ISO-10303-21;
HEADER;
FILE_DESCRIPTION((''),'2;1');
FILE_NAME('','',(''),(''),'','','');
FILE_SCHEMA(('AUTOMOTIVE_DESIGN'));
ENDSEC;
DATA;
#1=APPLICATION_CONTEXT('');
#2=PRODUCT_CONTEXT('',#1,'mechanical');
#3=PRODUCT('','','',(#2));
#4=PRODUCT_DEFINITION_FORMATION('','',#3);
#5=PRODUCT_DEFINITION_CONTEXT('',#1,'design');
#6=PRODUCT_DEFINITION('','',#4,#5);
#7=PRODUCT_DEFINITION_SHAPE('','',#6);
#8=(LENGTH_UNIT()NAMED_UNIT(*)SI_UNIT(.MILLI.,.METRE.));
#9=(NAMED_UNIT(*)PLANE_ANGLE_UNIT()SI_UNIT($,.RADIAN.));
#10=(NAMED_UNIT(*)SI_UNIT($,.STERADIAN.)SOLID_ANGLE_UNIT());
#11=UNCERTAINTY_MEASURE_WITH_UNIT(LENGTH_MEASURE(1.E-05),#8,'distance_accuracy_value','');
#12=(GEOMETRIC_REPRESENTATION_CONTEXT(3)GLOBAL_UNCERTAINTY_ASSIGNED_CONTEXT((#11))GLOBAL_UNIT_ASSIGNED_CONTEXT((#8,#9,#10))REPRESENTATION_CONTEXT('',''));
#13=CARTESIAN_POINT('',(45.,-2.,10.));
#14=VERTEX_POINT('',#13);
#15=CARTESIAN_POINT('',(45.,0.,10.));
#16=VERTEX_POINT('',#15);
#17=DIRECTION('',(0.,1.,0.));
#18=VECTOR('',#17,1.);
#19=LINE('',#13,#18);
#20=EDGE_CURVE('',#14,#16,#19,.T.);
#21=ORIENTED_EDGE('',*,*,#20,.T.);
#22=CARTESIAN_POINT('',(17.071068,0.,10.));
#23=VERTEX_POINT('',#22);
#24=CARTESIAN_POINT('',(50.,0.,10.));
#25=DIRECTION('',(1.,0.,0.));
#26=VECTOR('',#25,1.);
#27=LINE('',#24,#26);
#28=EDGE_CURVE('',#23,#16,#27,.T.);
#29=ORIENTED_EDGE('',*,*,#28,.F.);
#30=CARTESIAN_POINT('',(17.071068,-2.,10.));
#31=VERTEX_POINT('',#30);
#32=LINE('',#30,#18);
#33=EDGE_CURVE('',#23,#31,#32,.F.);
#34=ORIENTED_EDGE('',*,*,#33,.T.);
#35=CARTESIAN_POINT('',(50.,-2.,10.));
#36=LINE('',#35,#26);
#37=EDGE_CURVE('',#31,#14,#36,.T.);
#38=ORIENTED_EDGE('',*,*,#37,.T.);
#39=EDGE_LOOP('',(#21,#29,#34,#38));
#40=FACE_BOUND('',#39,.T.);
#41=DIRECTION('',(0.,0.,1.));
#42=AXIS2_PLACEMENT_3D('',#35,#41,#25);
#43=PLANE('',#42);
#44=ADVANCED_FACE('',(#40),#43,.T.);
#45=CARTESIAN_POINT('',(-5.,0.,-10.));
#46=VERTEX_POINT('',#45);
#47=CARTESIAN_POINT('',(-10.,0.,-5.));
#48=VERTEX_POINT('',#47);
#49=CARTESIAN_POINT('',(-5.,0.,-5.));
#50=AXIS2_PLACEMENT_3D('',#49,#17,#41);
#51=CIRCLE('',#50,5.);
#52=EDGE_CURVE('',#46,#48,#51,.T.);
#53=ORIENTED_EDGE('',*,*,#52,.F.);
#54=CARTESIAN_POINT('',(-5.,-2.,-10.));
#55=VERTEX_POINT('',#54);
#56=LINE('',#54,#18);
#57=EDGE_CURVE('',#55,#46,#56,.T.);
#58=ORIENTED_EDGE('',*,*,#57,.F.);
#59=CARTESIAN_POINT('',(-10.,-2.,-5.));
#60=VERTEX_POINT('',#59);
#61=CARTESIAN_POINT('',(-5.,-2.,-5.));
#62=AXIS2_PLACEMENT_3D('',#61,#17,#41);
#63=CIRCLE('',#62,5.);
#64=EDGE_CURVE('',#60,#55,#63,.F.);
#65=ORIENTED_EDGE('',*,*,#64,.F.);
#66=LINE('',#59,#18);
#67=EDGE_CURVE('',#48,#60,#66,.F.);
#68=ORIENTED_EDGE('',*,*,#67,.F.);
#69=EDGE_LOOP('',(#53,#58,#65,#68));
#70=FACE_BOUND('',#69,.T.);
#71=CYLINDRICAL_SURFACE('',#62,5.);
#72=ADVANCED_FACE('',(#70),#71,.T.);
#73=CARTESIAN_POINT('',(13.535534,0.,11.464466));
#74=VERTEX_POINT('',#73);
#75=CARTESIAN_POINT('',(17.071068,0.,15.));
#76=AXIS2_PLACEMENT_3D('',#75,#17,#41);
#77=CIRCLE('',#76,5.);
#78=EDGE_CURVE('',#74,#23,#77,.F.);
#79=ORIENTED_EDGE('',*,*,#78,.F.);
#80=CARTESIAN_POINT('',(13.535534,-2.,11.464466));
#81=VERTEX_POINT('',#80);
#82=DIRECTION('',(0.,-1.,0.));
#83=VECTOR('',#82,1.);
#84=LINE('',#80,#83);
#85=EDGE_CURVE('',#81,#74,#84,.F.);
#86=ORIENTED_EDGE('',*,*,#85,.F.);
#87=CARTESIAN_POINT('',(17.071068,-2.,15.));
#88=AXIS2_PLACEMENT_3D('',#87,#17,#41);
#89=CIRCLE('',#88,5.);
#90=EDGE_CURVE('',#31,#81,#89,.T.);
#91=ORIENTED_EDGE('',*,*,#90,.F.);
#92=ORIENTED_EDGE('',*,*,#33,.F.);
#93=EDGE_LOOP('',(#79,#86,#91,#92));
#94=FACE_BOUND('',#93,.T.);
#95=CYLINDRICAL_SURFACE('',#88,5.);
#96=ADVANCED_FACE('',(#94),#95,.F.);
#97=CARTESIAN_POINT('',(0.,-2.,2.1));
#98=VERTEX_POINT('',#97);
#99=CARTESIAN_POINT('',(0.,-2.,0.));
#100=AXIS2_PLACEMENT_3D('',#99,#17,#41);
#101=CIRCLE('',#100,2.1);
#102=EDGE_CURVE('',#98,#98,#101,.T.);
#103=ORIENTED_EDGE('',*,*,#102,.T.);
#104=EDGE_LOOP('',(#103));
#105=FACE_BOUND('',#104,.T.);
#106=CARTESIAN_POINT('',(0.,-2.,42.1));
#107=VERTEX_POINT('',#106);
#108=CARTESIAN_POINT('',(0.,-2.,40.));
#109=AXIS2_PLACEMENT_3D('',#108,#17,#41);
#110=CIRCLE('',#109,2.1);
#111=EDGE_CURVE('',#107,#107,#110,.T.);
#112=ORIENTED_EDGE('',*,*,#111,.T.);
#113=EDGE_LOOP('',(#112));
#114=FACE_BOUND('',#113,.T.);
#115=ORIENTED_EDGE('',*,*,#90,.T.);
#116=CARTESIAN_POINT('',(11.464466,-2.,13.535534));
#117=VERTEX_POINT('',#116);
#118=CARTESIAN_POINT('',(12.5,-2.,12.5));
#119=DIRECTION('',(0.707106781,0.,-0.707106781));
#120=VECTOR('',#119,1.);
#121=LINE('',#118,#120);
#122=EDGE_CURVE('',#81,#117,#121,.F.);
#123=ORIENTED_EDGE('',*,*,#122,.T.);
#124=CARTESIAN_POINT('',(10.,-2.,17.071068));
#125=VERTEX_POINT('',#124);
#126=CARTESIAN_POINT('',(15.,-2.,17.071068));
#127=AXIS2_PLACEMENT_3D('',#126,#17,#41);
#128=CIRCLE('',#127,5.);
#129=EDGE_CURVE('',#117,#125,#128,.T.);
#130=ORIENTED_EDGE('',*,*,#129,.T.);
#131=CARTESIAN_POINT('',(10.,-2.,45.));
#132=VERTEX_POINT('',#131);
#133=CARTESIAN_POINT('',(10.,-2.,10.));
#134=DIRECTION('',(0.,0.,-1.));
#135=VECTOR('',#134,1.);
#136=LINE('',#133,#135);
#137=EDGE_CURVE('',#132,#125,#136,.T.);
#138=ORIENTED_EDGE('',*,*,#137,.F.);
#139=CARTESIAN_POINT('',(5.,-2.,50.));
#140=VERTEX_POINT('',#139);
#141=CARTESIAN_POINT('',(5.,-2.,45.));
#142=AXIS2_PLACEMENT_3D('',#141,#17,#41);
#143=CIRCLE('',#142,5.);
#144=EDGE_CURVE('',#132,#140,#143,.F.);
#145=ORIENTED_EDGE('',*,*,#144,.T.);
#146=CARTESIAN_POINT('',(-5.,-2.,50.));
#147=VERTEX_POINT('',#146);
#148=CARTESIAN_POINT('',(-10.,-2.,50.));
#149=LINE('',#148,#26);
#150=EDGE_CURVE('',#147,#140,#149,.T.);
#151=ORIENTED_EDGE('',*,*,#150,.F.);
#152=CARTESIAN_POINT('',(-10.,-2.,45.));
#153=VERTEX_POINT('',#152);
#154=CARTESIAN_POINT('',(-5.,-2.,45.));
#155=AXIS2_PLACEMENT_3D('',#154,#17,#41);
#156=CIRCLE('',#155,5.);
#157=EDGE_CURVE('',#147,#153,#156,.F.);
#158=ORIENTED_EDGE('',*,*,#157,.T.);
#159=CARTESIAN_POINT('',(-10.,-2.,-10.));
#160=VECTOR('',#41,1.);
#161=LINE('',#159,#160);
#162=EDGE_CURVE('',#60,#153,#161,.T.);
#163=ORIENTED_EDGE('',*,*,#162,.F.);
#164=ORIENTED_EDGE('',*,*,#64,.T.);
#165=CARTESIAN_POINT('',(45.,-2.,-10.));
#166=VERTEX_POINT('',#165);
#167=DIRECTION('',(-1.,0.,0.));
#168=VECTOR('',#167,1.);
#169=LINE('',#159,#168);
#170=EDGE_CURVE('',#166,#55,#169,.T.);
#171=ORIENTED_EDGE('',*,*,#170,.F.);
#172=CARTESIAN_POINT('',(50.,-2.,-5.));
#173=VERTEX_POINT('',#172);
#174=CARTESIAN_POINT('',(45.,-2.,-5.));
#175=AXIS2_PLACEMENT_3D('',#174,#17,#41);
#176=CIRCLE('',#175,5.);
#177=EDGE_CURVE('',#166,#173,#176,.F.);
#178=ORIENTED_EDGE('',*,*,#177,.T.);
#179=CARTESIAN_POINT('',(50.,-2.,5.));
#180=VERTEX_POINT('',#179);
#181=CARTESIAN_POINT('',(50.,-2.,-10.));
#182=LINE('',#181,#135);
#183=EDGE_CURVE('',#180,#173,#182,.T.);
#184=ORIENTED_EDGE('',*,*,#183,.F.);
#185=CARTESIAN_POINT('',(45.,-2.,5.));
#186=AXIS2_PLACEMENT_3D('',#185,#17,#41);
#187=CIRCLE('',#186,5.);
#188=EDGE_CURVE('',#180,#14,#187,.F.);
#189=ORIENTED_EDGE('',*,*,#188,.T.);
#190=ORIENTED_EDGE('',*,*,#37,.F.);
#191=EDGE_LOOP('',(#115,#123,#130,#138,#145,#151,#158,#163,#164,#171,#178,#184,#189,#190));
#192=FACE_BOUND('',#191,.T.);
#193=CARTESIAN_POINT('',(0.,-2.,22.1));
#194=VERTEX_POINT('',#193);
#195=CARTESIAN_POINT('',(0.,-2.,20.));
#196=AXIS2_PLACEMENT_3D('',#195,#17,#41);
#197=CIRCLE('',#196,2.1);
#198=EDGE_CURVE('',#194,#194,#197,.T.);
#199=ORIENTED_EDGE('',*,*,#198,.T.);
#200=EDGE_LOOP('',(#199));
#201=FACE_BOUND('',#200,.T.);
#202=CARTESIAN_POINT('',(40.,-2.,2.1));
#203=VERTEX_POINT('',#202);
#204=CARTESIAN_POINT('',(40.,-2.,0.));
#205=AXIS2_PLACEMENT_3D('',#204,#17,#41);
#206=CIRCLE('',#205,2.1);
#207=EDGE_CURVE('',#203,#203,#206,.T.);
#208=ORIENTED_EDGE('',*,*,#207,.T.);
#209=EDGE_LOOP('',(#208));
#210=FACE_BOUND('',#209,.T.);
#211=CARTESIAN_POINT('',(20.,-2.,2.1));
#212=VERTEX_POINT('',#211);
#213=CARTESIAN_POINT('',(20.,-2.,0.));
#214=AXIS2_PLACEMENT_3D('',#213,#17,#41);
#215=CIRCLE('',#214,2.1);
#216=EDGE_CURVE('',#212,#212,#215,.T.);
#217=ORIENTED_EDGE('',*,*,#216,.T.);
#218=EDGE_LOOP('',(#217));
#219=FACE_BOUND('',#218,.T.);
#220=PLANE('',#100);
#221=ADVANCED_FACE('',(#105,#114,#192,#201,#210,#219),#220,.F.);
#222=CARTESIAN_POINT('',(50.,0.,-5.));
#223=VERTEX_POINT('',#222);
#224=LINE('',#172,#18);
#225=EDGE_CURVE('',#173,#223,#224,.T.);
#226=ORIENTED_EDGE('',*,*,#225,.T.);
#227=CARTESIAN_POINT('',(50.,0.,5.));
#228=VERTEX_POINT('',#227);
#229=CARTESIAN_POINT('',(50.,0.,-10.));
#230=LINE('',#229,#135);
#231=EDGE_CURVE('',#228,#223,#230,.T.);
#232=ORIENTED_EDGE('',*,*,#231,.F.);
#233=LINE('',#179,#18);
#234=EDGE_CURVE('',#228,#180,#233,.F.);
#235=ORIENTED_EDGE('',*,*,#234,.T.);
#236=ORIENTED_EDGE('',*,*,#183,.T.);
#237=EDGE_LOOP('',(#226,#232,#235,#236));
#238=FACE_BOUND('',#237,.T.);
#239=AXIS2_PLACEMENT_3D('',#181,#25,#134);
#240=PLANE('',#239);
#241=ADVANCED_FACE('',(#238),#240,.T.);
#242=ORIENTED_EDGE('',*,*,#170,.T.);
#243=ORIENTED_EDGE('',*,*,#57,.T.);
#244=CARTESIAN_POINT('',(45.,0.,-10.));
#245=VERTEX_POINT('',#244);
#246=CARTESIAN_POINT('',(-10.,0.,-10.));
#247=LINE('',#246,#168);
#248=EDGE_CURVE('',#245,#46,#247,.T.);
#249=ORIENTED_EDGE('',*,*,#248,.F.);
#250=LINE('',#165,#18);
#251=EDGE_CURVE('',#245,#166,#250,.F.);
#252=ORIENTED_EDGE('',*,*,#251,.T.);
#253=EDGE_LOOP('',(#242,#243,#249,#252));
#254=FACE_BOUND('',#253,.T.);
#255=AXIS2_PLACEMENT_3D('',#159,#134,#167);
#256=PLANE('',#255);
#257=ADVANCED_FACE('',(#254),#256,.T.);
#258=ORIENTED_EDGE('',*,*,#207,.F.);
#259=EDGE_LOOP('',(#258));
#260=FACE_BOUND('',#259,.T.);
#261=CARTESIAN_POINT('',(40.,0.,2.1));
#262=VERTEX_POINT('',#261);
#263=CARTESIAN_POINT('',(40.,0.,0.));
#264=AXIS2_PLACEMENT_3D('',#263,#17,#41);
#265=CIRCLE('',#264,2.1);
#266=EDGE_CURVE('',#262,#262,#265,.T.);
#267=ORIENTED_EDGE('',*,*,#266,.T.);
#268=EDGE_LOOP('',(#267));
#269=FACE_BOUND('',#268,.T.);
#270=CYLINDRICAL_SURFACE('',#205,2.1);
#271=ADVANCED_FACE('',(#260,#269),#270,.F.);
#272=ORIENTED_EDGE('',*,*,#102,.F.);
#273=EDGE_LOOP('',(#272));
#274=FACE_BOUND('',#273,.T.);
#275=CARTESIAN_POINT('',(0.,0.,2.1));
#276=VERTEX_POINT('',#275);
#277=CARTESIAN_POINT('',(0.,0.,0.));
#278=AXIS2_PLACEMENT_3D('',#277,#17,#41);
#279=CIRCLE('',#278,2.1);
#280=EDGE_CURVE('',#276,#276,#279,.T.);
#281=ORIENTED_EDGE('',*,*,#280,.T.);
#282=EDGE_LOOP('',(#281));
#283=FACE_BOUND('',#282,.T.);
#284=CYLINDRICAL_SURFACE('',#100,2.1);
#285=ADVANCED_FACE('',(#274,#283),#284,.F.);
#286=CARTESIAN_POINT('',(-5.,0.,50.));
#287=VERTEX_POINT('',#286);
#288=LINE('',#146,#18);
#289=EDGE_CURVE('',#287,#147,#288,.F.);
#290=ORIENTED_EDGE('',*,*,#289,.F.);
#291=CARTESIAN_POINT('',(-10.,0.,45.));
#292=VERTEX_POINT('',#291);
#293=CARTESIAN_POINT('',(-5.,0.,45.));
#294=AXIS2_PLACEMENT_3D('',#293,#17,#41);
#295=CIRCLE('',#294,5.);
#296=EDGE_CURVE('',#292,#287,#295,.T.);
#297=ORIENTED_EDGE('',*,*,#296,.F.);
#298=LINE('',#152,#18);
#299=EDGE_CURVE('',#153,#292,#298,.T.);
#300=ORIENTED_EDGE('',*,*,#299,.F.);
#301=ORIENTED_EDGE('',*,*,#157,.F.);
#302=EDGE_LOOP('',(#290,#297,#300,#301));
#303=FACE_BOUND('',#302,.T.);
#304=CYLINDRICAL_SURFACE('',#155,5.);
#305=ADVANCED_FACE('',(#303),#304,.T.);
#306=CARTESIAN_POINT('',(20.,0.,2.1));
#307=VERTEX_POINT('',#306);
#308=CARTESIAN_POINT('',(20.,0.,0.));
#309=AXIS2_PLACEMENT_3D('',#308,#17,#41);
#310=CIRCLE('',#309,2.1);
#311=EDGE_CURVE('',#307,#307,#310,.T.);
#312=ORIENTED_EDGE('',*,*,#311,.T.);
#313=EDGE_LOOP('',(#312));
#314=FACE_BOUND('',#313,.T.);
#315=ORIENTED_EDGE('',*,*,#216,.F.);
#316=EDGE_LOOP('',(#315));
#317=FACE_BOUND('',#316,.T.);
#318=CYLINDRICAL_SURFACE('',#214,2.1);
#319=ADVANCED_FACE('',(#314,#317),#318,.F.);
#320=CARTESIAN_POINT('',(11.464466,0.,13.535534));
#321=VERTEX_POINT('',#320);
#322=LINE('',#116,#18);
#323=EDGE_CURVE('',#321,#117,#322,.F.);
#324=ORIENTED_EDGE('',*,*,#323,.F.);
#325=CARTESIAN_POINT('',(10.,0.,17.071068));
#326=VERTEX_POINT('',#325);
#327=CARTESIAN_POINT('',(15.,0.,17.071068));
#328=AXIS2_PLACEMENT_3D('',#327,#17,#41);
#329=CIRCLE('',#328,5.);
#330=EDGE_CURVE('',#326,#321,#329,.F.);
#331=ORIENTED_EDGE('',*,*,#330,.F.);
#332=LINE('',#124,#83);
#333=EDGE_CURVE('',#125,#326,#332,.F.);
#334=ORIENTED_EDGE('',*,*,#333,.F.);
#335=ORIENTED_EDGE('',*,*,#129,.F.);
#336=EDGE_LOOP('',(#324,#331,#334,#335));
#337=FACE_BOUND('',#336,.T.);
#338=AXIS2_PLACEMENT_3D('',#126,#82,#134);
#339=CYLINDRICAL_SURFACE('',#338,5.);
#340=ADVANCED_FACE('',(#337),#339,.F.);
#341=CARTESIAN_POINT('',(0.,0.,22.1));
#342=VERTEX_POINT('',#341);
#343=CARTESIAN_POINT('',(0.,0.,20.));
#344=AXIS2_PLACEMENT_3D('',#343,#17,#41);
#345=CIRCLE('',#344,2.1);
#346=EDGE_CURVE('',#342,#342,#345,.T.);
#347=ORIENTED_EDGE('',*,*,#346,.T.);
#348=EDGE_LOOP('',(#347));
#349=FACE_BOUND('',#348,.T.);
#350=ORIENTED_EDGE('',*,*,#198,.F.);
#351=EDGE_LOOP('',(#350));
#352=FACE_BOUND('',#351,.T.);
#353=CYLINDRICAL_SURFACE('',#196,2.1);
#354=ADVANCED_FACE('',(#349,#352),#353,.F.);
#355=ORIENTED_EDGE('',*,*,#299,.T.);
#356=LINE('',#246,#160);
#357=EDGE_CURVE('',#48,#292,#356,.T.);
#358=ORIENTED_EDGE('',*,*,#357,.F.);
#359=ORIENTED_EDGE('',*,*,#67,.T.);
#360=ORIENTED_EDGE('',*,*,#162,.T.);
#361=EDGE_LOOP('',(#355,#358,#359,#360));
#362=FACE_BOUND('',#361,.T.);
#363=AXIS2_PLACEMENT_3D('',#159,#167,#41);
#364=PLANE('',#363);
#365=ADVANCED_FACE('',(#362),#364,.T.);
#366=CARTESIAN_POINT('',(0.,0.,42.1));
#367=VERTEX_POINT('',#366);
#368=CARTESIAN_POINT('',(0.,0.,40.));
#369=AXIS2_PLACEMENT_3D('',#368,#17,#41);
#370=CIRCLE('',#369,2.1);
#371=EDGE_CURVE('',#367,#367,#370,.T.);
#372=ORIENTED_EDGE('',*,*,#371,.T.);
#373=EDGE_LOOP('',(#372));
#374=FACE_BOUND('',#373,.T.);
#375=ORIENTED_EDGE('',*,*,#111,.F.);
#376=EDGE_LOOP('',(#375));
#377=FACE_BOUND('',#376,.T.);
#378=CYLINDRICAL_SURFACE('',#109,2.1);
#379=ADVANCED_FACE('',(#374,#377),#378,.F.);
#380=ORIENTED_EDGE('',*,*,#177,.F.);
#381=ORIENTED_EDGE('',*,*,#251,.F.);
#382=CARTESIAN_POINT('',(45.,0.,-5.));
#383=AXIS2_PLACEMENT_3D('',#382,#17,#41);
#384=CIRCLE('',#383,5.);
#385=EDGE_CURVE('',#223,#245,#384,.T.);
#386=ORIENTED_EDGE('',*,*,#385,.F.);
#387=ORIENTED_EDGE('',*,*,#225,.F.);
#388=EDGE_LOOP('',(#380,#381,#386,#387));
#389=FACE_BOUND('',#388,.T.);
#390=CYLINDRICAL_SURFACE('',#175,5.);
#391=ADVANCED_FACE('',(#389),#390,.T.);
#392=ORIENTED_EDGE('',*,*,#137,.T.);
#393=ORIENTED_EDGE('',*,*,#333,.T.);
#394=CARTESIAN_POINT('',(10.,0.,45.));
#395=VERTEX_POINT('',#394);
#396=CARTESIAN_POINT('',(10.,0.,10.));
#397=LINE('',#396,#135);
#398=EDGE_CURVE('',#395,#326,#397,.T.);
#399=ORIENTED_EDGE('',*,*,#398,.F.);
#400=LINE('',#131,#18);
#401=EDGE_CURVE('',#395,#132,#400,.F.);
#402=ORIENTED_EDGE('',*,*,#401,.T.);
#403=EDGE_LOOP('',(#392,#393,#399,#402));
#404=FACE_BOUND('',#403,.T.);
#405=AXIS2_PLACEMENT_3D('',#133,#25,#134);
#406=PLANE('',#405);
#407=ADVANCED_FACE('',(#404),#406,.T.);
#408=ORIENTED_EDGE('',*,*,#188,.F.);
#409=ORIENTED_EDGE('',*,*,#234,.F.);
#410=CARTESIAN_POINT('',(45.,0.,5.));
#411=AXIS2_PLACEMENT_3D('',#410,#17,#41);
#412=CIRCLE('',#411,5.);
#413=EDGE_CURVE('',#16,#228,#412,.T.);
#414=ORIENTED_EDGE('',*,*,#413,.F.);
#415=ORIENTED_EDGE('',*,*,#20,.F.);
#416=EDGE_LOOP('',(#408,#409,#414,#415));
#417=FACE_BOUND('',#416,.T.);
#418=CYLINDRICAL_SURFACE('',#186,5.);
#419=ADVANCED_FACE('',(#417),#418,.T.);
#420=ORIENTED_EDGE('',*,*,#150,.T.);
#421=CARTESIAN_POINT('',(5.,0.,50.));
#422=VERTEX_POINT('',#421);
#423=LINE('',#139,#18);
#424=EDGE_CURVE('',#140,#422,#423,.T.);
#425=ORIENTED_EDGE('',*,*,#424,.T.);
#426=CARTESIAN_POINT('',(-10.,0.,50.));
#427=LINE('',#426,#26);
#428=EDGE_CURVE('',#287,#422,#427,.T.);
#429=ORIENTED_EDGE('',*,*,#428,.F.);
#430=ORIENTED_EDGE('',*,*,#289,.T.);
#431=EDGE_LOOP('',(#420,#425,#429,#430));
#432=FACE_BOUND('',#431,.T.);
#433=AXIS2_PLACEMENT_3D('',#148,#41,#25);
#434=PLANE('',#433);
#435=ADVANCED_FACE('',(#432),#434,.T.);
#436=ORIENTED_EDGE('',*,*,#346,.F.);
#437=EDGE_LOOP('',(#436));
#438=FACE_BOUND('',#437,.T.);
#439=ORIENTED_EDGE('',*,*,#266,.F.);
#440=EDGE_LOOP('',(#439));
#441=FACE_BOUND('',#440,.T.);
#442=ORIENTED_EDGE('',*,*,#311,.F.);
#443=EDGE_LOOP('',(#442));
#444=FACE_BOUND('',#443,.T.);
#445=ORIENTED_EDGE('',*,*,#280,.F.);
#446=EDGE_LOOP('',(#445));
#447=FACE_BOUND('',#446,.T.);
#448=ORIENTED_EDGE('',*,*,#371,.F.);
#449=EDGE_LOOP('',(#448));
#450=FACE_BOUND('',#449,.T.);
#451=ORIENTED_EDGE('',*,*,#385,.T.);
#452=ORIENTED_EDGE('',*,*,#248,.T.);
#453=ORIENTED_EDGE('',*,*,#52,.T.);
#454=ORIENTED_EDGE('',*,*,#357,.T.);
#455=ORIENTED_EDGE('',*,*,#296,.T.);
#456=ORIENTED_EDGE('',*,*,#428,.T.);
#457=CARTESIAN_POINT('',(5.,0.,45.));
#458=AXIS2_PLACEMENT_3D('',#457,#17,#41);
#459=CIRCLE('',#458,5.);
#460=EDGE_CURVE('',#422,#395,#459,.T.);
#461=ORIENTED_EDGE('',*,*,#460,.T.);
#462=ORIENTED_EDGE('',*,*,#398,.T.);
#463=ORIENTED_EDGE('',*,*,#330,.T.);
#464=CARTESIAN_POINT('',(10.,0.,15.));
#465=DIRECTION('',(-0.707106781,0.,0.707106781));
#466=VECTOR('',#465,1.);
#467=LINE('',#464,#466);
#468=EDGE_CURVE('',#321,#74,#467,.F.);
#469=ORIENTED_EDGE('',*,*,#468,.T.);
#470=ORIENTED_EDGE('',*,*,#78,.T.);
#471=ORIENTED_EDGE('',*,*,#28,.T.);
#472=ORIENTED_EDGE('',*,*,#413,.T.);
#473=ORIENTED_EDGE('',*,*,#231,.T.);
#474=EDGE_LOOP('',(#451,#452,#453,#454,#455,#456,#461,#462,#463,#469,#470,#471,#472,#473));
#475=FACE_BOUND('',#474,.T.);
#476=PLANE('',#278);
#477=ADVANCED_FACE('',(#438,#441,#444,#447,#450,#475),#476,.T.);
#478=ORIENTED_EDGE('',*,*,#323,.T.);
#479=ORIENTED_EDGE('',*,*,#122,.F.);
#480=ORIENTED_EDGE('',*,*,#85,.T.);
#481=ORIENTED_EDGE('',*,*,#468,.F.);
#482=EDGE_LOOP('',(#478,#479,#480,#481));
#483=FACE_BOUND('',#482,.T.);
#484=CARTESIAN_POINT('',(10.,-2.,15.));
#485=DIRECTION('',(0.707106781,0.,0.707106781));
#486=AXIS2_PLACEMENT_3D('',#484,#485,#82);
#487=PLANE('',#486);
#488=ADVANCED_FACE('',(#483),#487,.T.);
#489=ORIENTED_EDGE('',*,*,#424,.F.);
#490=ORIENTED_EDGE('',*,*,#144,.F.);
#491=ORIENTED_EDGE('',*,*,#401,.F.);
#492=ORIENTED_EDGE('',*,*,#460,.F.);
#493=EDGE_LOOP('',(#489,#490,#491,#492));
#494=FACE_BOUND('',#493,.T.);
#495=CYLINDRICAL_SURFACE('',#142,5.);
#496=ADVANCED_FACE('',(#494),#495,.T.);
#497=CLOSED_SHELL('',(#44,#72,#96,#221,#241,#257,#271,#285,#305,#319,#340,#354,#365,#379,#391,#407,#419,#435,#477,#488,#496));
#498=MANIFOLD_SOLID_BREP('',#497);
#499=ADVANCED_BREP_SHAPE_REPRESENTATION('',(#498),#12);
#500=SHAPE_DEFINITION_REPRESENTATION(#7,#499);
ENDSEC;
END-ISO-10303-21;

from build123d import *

# Parameters (mm, degrees)
SKETCH1_R          = 2.1
BASE_FLANGE1_DEPTH = 2
FILLET_SHAPE_R     = 5
CHAMFER2_SIZE      = 5
FILLET2_R          = 5


# Sheet-metal steps are written as plain solids
with BuildPart() as part:
    # Sketch1 → Base-Flange1 (new body)
    with BuildSketch(Plane(origin=(0, 0, 0), x_dir=(1, 0, 0), z_dir=(0, 1, 0))):
        Polygon((-10, 10), (50, 10), (50, -10), (10, -10), (10, -50), (-10, -50), align=None)
        with Locations(Location((0, 0, 0), (0, 0, 270))):
            Circle(SKETCH1_R, mode=Mode.SUBTRACT)
        with Locations(Location((20, 0, 0), (0, 0, 270))):
            Circle(SKETCH1_R, mode=Mode.SUBTRACT)
        with Locations(Location((40, 0, 0), (0, 0, 270))):
            Circle(SKETCH1_R, mode=Mode.SUBTRACT)
        with Locations(Location((0, -20, 0), (0, 0, 270))):
            Circle(SKETCH1_R, mode=Mode.SUBTRACT)
        with Locations(Location((0, -40, 0), (0, 0, 270))):
            Circle(SKETCH1_R, mode=Mode.SUBTRACT)
    extrude(amount=-BASE_FLANGE1_DEPTH)

    # Fillet_Shape
    fillet_shape_edges = [part.edges().sort_by_distance(p)[0] for p in [
        (10, -1, 50),
        (-10, -1, 50),
        (-10, -1, -10),
        (50, -1, -10),
        (50, -1, 10),
    ]]
    fillet(fillet_shape_edges, radius=FILLET_SHAPE_R)

    # Chamfer2
    chamfer2_edges = [part.edges().sort_by_distance(p)[0] for p in [
        (10, -1, 10),
    ]]
    chamfer(chamfer2_edges, length=CHAMFER2_SIZE)

    # Fillet2
    fillet2_edges = [part.edges().sort_by_distance(p)[0] for p in [
        (10, -1, 15),
        (15, -1, 10),
    ]]
    fillet(fillet2_edges, radius=FILLET2_R)


solid = part.part
